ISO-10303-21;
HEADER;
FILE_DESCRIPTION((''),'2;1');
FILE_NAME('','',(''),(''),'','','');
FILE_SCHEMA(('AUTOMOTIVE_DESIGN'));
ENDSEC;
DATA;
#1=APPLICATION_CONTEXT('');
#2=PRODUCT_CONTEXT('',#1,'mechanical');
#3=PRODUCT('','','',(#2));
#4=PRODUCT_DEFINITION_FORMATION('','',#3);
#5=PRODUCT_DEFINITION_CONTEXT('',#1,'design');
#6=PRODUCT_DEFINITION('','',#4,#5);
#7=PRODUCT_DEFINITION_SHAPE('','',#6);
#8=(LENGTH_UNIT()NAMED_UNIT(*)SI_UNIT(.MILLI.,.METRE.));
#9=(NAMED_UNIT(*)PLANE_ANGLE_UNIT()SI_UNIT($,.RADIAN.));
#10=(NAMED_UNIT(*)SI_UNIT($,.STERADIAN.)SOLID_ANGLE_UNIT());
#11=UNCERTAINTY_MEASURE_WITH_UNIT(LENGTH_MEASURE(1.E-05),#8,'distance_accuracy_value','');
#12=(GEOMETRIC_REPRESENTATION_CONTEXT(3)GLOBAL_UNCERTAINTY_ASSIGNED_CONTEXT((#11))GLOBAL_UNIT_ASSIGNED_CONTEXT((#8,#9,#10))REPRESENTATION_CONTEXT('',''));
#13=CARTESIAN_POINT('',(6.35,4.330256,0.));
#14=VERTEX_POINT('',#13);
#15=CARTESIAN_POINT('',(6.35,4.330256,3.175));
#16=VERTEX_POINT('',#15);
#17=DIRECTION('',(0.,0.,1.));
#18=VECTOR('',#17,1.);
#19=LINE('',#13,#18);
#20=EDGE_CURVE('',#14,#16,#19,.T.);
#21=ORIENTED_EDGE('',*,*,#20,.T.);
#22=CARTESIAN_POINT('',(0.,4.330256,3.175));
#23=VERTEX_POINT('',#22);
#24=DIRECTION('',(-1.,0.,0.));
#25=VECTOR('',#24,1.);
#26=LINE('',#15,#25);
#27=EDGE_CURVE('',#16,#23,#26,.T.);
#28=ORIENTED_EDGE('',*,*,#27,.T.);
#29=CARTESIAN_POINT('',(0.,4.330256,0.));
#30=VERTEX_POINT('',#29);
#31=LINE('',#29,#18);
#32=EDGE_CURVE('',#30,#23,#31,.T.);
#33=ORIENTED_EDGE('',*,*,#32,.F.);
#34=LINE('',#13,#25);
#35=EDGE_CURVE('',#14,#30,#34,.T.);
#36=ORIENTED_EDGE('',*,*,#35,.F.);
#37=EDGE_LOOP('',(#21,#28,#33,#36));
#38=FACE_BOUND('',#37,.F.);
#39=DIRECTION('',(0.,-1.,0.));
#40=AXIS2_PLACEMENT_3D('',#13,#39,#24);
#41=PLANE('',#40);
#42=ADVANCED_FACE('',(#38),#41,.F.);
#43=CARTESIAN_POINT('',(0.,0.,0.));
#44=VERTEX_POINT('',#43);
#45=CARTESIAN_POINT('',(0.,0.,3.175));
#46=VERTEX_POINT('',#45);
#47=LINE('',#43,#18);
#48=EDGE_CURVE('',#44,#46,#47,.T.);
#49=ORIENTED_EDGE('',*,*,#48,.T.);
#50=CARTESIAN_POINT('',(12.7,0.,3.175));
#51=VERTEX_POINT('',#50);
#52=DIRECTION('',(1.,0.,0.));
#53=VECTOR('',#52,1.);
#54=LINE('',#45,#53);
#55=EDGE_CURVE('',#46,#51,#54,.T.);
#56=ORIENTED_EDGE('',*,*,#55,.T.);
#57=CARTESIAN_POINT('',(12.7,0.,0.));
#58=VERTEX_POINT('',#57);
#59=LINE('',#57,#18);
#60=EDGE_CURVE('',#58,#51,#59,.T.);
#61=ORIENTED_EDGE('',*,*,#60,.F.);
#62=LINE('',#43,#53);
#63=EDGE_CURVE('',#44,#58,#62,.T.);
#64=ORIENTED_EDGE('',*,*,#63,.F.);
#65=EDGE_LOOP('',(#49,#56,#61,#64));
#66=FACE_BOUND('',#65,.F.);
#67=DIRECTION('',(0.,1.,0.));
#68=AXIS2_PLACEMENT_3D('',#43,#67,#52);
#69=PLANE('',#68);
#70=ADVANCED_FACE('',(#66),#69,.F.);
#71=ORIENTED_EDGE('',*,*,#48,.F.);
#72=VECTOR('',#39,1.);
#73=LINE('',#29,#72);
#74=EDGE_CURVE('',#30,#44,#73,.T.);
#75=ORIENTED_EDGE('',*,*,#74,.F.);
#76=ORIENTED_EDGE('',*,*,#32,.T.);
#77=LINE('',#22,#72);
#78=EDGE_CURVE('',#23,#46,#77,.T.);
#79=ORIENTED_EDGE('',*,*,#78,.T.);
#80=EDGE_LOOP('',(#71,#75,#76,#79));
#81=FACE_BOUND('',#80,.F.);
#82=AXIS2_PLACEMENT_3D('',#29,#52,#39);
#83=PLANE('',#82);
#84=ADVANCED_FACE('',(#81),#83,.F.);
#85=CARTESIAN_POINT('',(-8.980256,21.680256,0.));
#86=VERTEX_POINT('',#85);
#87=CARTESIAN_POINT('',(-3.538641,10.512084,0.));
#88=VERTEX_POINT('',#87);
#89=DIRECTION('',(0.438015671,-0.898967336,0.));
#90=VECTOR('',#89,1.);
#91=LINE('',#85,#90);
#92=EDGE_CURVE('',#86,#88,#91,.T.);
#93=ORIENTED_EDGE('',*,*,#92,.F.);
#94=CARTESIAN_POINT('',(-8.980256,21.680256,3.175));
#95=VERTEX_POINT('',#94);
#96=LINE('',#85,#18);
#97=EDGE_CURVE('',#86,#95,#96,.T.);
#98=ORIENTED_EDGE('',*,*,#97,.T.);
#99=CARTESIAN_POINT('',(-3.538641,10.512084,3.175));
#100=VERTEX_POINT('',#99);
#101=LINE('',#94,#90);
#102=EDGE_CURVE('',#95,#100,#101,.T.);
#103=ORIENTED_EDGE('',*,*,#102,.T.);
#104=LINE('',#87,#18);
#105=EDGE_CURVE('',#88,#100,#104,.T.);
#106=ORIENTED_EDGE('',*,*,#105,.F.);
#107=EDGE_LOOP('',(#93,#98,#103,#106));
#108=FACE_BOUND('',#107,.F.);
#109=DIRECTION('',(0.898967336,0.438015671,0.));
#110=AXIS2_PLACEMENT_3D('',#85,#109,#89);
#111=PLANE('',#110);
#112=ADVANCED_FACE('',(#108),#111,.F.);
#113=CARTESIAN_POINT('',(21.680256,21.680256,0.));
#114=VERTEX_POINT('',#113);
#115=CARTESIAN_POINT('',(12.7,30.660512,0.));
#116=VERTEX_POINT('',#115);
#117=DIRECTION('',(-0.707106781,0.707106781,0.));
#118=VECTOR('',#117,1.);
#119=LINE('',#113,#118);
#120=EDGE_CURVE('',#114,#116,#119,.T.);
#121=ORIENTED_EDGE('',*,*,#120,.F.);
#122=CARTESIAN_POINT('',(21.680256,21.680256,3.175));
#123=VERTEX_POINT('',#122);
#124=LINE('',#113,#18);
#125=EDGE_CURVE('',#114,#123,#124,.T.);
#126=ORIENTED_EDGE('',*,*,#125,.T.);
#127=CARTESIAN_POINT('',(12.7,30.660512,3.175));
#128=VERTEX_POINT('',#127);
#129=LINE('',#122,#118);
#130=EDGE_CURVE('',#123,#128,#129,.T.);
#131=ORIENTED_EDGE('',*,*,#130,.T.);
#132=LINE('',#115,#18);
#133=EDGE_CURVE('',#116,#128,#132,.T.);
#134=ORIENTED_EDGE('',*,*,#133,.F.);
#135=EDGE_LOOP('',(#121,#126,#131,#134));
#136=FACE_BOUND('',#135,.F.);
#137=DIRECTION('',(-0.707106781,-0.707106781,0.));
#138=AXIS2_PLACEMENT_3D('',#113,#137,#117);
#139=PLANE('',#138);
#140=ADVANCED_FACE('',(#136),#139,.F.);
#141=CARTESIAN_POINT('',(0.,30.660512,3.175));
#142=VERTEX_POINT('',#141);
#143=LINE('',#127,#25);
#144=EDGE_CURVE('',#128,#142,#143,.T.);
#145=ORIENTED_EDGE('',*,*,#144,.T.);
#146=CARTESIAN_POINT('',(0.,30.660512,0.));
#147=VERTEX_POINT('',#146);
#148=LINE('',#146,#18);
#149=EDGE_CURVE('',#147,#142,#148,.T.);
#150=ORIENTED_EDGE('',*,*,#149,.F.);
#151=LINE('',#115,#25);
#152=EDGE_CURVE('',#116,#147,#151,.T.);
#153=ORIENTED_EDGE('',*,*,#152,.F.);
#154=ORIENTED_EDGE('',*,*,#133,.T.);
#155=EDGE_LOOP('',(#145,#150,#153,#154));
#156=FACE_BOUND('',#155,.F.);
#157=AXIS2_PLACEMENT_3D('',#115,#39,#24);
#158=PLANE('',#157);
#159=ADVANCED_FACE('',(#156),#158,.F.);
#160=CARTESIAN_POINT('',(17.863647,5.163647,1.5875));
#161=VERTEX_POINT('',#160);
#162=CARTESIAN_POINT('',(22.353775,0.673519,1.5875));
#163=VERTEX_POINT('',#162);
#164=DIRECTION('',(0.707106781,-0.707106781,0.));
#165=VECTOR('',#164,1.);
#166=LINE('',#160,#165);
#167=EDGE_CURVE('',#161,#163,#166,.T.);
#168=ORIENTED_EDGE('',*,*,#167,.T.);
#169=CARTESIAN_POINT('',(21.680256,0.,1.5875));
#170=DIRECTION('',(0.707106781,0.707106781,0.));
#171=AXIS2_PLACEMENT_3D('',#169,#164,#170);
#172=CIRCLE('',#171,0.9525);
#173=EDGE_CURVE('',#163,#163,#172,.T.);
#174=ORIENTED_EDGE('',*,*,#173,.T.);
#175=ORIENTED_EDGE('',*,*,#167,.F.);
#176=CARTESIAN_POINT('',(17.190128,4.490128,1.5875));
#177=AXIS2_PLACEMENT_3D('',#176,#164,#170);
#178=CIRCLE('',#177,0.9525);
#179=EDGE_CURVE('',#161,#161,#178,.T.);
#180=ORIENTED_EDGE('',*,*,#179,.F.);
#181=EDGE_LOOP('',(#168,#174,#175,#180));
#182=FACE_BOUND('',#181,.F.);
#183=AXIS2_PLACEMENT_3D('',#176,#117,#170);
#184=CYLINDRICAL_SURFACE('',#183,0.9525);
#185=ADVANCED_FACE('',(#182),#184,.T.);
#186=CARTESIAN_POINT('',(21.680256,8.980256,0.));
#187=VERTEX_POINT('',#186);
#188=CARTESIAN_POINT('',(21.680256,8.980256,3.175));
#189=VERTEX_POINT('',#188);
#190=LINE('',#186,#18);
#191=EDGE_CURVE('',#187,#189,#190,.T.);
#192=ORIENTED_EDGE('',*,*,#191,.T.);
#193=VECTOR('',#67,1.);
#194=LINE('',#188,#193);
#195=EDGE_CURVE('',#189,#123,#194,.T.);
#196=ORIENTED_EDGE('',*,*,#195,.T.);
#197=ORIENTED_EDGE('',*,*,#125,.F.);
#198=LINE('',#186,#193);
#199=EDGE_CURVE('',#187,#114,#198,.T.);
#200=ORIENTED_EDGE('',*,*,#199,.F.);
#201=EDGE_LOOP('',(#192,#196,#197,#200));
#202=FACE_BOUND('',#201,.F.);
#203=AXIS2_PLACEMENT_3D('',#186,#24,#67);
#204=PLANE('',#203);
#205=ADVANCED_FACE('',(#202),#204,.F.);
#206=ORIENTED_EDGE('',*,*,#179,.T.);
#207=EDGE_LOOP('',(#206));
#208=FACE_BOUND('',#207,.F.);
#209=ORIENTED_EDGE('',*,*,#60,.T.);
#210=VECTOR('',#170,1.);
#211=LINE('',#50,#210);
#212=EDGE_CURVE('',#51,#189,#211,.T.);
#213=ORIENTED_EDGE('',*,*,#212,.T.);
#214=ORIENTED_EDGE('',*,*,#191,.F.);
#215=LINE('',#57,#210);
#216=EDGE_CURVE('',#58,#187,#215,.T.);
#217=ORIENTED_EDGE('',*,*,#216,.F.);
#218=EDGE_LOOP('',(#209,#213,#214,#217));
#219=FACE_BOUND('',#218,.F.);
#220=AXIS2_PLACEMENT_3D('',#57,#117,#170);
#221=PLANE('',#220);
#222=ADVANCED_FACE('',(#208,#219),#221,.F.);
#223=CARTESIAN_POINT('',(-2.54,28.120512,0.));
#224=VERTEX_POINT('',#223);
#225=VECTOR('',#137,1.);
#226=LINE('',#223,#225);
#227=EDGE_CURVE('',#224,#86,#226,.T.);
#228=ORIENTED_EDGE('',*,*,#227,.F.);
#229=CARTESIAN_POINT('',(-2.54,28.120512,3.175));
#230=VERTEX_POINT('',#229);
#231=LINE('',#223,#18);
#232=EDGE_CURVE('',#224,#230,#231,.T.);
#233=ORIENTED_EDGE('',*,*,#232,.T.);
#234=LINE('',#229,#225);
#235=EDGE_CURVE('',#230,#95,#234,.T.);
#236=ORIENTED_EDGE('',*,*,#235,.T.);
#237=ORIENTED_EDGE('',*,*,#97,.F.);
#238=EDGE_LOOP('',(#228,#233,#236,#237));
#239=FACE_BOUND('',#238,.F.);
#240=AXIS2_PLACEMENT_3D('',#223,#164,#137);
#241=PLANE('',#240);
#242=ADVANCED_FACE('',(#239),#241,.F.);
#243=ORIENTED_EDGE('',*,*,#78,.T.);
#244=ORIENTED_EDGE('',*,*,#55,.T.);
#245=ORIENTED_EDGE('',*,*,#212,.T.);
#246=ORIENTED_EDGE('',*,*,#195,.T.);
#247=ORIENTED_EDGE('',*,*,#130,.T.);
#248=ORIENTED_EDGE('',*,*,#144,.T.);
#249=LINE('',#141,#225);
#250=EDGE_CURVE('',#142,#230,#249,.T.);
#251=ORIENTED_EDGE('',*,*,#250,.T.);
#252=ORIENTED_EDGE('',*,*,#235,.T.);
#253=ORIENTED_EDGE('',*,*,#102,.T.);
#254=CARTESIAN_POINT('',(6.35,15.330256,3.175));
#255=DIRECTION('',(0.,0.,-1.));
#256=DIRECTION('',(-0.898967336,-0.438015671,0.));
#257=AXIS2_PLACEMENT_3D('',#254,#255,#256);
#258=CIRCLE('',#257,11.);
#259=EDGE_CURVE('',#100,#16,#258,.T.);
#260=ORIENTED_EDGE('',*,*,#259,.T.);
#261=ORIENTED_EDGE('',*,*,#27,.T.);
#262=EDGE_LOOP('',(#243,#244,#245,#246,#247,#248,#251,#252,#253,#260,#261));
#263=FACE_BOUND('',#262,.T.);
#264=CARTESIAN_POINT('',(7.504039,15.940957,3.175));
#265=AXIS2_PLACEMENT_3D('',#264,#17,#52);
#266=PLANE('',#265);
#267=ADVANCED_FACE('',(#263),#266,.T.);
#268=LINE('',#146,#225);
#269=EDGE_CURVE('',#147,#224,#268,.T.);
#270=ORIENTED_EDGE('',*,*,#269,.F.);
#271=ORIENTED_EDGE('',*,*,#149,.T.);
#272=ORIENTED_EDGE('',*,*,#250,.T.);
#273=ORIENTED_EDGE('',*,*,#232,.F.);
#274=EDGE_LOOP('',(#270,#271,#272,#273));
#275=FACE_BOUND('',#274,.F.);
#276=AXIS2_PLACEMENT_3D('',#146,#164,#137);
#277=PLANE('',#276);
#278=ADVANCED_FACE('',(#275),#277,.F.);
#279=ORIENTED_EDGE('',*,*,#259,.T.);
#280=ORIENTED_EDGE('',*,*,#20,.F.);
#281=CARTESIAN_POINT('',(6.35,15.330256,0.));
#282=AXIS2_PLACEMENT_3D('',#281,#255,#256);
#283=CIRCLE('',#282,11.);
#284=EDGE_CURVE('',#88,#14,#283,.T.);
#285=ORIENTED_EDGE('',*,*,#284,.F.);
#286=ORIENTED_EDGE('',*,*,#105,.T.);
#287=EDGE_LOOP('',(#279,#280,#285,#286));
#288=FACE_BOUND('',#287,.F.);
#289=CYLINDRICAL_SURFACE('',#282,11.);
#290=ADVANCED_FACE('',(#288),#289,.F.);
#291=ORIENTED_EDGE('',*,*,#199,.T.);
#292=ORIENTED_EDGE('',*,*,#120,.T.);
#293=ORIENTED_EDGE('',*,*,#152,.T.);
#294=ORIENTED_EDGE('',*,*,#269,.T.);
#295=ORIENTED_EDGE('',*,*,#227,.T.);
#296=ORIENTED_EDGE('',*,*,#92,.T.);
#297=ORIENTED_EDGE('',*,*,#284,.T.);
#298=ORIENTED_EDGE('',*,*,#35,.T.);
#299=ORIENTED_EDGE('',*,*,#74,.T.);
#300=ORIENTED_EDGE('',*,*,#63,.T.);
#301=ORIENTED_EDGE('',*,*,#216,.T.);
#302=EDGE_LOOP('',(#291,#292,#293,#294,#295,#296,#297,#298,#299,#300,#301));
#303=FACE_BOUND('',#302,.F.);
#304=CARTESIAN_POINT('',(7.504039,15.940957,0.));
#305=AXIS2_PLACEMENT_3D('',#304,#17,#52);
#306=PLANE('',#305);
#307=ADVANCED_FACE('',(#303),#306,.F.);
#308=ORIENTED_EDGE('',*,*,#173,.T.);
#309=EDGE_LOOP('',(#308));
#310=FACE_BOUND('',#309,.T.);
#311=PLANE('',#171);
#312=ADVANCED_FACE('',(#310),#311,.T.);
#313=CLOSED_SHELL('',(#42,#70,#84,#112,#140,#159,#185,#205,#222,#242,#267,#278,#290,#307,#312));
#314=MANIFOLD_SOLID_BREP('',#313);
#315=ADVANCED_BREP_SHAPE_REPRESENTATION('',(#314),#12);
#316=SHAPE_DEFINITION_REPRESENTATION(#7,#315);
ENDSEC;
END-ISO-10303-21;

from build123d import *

# Parameters (mm, degrees)
F1_DEPTH = 3.175
F2_R     = 0.9525
F3_DEPTH = 6.35


# Not quite as in the source:
# - a length typed as a fraction of an inch, garbled in the dataset ("3 / 203.2 mm" for 3/8 in), is restored


with BuildPart() as f1:
    # F0 (on Top) → F1 (new body)
    with BuildSketch(Plane.XY):
        with BuildLine():
            Line((0, 4.3302561211), (0, 0))
            Line((0, 0), (12.7, 0))
            Line((12.7, 0), (15.24, 2.54))
            Line((15.24, 2.54), (21.6802561211, 8.9802561211))
            Line((21.6802561211, 8.9802561211), (21.6802561211, 21.6802561211))
            Line((21.6802561211, 21.6802561211), (12.7, 30.6605122421))
            Line((12.7, 30.6605122421), (0, 30.6605122421))
            Line((0, 30.6605122421), (-2.54, 28.1205122421))
            Line((-2.54, 28.1205122421), (-8.9802561211, 21.6802561211))
            Line((-8.9802561211, 21.6802561211), (-3.5386407003, 10.5120837393))
            ThreePointArc((-3.5386407003, 10.5120837393), (12.1809563452, 24.657632392), (6.35, 4.3302561211))
            Line((6.35, 4.3302561211), (0, 4.3302561211))
        make_face()
    extrude(amount=F1_DEPTH)

    # F2 (on face) → F3 (join)
    with BuildSketch(Plane(origin=(6.35, -6.35, 0), x_dir=(0.7071067812, 0.7071067812, 0), z_dir=(0.7071067812, -0.7071067812, 0))):
        with Locations((15.3302561211, 1.5875)):
            Circle(F2_R)
    extrude(amount=F3_DEPTH)


solid = f1.part
